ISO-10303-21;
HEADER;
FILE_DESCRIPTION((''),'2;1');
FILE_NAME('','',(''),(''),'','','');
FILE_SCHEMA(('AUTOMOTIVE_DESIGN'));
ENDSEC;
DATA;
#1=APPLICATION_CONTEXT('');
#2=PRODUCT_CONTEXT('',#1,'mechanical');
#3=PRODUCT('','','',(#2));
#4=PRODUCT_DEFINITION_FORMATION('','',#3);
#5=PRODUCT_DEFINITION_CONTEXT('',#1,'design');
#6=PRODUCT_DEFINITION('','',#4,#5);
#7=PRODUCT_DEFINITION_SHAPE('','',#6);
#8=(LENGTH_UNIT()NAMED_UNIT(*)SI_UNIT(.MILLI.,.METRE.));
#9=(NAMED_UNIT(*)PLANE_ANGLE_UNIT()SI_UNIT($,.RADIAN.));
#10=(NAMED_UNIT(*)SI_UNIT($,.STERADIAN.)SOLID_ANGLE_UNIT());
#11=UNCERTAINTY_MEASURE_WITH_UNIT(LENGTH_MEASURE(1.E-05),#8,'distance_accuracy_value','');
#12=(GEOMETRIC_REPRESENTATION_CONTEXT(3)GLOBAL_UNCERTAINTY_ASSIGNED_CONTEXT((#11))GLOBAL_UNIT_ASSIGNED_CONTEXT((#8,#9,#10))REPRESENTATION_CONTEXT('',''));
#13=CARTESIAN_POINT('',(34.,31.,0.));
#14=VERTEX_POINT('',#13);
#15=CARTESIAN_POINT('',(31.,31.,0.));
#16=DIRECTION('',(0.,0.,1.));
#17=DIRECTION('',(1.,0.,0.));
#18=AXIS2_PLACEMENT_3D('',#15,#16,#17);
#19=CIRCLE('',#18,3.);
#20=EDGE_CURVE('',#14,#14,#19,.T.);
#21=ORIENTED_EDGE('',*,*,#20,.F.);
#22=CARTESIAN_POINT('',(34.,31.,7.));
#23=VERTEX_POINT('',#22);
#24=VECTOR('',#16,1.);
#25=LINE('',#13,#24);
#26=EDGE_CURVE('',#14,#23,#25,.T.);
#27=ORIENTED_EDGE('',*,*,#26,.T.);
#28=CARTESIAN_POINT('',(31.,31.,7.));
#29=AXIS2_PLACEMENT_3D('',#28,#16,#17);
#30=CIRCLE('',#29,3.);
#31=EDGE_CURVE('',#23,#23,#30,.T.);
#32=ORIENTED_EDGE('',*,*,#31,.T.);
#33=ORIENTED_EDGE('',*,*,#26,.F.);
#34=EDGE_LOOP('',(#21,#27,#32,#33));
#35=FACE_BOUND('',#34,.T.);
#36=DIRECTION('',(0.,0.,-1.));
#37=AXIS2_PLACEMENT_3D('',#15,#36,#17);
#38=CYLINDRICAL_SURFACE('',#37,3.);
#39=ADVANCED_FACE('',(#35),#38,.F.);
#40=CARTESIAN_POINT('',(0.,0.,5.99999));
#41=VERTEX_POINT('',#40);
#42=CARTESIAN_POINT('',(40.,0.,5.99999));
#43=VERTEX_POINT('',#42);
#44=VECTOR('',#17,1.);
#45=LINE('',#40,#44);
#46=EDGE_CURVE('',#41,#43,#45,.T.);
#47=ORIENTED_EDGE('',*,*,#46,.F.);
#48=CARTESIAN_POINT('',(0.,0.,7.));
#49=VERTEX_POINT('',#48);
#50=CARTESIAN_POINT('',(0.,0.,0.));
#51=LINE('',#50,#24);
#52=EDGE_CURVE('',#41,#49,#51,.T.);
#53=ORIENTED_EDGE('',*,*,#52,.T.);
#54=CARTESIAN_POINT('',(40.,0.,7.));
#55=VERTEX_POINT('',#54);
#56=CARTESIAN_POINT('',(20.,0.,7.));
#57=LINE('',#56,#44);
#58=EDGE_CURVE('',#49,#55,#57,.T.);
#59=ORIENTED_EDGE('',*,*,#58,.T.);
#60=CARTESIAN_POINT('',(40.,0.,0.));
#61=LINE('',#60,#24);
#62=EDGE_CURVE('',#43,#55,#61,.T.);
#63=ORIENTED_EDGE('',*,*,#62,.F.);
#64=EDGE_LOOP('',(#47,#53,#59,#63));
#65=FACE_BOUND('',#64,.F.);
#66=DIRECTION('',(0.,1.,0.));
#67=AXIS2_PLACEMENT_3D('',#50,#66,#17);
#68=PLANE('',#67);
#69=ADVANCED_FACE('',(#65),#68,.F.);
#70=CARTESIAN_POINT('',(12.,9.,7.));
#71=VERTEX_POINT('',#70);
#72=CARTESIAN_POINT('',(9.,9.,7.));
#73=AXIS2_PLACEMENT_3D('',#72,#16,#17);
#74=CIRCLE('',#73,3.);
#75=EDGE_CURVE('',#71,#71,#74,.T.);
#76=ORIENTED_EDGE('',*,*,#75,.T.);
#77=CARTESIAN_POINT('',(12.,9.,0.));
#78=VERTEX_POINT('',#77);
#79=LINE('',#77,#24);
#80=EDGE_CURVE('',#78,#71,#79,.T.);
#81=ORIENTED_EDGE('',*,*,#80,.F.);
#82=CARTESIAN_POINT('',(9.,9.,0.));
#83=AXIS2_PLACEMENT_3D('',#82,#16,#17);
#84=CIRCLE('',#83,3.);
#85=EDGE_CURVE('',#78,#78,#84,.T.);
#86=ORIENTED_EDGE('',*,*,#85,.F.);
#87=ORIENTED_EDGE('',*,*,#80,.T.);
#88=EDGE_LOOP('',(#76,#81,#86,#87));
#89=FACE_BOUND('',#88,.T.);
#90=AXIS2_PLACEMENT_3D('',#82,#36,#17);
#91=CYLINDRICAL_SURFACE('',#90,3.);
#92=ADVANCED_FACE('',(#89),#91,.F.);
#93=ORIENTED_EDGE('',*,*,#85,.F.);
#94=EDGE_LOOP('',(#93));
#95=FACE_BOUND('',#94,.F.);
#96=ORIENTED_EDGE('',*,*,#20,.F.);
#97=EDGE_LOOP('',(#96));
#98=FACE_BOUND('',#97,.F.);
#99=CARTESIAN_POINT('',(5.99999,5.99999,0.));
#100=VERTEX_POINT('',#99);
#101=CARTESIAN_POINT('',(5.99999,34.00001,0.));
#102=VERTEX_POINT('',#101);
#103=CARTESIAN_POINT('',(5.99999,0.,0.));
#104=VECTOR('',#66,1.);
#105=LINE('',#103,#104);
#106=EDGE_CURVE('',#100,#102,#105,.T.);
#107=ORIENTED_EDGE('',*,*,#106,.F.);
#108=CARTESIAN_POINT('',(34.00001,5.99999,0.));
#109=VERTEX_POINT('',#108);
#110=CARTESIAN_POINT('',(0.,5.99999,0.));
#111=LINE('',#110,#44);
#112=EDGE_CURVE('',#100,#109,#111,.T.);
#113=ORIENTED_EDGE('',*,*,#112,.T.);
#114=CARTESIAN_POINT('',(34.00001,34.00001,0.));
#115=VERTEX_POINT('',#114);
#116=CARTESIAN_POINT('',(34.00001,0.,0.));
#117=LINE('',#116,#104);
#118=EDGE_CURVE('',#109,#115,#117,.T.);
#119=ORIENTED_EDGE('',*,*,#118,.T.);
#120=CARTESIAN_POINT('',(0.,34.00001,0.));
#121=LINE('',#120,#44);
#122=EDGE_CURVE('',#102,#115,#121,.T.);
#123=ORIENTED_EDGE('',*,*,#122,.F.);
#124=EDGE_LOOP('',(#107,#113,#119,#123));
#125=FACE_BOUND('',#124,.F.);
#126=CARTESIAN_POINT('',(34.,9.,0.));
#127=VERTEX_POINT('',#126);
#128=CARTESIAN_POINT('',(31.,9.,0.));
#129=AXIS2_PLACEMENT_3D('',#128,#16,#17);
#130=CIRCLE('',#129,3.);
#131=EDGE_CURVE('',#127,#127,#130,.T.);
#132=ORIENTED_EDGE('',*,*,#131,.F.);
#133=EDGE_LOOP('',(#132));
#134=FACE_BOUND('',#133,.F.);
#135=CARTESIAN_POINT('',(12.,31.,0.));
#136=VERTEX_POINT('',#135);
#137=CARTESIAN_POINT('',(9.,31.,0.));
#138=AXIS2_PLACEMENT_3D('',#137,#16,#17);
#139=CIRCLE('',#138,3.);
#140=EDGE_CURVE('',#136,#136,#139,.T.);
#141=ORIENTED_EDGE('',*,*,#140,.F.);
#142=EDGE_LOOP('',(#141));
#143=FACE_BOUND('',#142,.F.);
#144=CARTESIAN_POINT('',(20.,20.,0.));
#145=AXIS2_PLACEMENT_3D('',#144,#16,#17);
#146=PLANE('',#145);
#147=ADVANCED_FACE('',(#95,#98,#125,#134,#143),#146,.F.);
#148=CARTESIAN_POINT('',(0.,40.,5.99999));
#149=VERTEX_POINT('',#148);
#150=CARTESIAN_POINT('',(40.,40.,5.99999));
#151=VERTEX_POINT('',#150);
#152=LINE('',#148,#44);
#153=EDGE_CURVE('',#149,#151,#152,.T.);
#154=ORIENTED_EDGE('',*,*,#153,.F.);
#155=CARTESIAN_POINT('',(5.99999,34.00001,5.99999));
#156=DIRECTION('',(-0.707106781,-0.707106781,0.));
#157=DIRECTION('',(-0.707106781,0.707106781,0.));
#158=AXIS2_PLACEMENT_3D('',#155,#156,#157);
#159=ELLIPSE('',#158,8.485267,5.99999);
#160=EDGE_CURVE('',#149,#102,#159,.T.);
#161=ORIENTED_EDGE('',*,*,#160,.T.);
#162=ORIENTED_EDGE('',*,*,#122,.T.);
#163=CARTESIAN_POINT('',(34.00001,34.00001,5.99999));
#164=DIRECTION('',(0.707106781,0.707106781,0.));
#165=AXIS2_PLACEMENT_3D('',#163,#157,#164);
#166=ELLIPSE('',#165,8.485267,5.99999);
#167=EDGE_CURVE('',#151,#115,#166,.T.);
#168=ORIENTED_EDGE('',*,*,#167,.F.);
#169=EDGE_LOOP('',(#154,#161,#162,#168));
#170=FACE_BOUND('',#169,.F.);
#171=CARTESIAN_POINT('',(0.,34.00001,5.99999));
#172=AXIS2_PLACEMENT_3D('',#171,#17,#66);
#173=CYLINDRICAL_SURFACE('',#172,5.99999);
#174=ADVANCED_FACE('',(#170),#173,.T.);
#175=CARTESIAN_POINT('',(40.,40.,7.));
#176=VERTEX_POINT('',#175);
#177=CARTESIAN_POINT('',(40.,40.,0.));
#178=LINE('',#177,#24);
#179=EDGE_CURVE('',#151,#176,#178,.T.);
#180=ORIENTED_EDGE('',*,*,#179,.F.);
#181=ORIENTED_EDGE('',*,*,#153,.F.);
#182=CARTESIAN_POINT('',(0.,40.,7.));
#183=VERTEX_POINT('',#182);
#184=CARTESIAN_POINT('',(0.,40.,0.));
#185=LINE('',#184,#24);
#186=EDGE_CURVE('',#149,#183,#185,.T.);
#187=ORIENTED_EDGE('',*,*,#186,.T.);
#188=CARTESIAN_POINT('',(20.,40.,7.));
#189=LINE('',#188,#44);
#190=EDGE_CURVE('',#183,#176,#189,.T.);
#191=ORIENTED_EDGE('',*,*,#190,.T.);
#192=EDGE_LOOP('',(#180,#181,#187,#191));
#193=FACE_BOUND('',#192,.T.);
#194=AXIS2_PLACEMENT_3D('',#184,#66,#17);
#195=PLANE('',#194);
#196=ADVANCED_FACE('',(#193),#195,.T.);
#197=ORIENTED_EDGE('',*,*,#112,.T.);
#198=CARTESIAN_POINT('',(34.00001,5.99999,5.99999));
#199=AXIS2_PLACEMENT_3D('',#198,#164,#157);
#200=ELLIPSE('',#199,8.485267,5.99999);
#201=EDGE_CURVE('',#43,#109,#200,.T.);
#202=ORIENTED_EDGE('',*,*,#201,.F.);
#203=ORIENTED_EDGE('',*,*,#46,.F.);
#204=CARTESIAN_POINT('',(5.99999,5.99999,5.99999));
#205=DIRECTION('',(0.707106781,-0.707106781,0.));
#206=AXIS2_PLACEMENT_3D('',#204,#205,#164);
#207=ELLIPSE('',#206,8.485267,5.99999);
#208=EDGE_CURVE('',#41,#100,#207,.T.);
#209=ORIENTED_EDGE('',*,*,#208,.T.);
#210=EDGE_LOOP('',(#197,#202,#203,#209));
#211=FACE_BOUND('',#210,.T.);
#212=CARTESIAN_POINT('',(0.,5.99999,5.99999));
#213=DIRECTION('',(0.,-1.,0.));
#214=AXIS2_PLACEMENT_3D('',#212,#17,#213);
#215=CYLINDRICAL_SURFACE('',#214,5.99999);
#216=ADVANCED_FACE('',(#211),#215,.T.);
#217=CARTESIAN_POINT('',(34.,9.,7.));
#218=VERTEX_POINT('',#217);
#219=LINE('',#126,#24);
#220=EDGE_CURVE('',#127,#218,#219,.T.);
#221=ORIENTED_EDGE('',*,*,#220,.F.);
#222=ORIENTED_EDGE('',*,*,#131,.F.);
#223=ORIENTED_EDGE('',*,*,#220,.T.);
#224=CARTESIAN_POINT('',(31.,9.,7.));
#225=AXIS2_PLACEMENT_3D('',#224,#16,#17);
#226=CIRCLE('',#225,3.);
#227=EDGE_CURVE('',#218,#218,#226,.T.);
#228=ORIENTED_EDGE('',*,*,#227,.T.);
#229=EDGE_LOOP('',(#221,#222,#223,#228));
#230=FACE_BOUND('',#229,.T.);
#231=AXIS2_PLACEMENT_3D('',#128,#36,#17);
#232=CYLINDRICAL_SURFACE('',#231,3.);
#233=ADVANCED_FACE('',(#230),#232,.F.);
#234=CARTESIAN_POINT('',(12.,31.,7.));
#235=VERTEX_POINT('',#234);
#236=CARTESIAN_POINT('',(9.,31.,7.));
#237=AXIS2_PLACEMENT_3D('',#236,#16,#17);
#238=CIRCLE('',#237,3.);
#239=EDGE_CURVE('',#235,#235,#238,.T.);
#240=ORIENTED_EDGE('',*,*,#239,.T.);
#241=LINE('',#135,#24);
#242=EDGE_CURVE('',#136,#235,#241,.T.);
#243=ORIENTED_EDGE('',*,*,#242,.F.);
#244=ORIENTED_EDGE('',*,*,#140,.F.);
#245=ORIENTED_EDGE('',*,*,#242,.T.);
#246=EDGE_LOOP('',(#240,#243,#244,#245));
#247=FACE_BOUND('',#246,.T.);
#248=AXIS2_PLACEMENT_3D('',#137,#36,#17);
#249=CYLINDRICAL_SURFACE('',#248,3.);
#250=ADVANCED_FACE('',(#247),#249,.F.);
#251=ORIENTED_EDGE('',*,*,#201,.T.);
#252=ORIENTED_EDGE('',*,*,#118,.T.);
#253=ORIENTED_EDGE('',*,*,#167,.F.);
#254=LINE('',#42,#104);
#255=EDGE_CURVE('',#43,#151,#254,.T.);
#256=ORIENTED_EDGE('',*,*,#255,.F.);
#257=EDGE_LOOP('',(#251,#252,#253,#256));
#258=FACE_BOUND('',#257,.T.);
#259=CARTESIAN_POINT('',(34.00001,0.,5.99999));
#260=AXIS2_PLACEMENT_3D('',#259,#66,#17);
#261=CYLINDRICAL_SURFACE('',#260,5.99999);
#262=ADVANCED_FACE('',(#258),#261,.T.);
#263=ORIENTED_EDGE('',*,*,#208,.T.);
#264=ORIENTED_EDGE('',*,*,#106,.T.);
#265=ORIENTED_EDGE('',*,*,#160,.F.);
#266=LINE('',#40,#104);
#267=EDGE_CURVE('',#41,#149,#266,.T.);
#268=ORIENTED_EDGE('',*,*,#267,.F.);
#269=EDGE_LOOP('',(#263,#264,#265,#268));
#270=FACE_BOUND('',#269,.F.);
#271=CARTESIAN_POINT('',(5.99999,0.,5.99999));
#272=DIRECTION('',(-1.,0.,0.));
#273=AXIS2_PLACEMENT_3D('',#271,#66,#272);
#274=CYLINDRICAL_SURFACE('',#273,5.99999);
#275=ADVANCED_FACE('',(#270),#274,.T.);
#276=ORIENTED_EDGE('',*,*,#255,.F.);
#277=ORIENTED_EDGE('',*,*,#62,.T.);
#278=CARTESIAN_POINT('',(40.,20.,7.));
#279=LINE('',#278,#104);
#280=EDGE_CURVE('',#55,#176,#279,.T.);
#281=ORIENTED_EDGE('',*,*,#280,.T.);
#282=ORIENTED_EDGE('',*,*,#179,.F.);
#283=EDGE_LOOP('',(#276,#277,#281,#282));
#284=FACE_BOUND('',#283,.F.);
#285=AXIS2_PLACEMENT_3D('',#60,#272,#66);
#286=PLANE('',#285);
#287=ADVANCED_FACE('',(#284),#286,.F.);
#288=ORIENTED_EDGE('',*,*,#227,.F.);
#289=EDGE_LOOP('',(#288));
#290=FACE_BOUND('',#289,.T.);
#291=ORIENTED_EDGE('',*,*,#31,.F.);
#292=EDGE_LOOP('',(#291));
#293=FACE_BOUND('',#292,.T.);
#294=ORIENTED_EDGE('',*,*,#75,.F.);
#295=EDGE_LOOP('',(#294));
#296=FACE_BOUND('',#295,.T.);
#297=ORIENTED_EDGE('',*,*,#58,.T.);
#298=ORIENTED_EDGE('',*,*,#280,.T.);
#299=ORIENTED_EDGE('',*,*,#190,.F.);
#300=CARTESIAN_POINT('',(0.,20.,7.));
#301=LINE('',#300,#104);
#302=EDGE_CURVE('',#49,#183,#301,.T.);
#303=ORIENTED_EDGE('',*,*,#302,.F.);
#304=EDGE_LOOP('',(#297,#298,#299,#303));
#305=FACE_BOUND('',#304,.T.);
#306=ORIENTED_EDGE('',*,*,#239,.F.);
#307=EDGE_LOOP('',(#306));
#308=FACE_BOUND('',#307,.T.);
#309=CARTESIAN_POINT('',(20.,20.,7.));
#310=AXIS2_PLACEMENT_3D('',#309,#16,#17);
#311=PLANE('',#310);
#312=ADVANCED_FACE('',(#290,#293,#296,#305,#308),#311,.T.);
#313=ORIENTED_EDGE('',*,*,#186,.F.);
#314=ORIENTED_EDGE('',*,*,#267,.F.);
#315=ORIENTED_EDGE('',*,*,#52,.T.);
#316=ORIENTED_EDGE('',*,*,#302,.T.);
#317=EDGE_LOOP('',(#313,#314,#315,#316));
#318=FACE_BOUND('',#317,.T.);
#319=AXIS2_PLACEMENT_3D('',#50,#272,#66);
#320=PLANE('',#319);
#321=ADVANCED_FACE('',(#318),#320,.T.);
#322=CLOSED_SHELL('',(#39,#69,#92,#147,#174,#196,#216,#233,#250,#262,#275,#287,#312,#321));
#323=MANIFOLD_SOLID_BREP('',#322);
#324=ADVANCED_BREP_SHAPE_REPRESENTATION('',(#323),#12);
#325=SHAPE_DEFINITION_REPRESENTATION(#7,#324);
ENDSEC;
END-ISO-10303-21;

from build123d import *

# Parameters (mm, degrees)
F0_W     = 40
F0_H     = 40
F0_R     = 3
F1_DEPTH = 7
F2_R     = 5.99999


# Not quite as in the source:
# - a fillet or chamfer is up to 0.001 mm smaller than in the source, because OpenCascade refuses the exact size


with BuildPart() as f1:
    # F0 (on Top) → F1 (new body)
    with BuildSketch(Plane.XY):
        with Locations((20, 20)):
            Rectangle(F0_W, F0_H)
        with Locations((9, 9)):
            Circle(F0_R, mode=Mode.SUBTRACT)
        with Locations((31, 9)):
            Circle(F0_R, mode=Mode.SUBTRACT)
        with Locations((9, 31)):
            Circle(F0_R, mode=Mode.SUBTRACT)
        with Locations((31, 31)):
            Circle(F0_R, mode=Mode.SUBTRACT)
    extrude(amount=F1_DEPTH)

    # F2 (radius 6 in the source; OpenCascade refuses exactly that, so slightly less here)
    f2_edges = [f1.edges().sort_by_distance(p)[0] for p in [
        (40, 20, 0),
        (20, 0, 0),
        (0, 20, 0),
        (20, 40, 0),
    ]]
    fillet(f2_edges, radius=F2_R)


solid = f1.part
